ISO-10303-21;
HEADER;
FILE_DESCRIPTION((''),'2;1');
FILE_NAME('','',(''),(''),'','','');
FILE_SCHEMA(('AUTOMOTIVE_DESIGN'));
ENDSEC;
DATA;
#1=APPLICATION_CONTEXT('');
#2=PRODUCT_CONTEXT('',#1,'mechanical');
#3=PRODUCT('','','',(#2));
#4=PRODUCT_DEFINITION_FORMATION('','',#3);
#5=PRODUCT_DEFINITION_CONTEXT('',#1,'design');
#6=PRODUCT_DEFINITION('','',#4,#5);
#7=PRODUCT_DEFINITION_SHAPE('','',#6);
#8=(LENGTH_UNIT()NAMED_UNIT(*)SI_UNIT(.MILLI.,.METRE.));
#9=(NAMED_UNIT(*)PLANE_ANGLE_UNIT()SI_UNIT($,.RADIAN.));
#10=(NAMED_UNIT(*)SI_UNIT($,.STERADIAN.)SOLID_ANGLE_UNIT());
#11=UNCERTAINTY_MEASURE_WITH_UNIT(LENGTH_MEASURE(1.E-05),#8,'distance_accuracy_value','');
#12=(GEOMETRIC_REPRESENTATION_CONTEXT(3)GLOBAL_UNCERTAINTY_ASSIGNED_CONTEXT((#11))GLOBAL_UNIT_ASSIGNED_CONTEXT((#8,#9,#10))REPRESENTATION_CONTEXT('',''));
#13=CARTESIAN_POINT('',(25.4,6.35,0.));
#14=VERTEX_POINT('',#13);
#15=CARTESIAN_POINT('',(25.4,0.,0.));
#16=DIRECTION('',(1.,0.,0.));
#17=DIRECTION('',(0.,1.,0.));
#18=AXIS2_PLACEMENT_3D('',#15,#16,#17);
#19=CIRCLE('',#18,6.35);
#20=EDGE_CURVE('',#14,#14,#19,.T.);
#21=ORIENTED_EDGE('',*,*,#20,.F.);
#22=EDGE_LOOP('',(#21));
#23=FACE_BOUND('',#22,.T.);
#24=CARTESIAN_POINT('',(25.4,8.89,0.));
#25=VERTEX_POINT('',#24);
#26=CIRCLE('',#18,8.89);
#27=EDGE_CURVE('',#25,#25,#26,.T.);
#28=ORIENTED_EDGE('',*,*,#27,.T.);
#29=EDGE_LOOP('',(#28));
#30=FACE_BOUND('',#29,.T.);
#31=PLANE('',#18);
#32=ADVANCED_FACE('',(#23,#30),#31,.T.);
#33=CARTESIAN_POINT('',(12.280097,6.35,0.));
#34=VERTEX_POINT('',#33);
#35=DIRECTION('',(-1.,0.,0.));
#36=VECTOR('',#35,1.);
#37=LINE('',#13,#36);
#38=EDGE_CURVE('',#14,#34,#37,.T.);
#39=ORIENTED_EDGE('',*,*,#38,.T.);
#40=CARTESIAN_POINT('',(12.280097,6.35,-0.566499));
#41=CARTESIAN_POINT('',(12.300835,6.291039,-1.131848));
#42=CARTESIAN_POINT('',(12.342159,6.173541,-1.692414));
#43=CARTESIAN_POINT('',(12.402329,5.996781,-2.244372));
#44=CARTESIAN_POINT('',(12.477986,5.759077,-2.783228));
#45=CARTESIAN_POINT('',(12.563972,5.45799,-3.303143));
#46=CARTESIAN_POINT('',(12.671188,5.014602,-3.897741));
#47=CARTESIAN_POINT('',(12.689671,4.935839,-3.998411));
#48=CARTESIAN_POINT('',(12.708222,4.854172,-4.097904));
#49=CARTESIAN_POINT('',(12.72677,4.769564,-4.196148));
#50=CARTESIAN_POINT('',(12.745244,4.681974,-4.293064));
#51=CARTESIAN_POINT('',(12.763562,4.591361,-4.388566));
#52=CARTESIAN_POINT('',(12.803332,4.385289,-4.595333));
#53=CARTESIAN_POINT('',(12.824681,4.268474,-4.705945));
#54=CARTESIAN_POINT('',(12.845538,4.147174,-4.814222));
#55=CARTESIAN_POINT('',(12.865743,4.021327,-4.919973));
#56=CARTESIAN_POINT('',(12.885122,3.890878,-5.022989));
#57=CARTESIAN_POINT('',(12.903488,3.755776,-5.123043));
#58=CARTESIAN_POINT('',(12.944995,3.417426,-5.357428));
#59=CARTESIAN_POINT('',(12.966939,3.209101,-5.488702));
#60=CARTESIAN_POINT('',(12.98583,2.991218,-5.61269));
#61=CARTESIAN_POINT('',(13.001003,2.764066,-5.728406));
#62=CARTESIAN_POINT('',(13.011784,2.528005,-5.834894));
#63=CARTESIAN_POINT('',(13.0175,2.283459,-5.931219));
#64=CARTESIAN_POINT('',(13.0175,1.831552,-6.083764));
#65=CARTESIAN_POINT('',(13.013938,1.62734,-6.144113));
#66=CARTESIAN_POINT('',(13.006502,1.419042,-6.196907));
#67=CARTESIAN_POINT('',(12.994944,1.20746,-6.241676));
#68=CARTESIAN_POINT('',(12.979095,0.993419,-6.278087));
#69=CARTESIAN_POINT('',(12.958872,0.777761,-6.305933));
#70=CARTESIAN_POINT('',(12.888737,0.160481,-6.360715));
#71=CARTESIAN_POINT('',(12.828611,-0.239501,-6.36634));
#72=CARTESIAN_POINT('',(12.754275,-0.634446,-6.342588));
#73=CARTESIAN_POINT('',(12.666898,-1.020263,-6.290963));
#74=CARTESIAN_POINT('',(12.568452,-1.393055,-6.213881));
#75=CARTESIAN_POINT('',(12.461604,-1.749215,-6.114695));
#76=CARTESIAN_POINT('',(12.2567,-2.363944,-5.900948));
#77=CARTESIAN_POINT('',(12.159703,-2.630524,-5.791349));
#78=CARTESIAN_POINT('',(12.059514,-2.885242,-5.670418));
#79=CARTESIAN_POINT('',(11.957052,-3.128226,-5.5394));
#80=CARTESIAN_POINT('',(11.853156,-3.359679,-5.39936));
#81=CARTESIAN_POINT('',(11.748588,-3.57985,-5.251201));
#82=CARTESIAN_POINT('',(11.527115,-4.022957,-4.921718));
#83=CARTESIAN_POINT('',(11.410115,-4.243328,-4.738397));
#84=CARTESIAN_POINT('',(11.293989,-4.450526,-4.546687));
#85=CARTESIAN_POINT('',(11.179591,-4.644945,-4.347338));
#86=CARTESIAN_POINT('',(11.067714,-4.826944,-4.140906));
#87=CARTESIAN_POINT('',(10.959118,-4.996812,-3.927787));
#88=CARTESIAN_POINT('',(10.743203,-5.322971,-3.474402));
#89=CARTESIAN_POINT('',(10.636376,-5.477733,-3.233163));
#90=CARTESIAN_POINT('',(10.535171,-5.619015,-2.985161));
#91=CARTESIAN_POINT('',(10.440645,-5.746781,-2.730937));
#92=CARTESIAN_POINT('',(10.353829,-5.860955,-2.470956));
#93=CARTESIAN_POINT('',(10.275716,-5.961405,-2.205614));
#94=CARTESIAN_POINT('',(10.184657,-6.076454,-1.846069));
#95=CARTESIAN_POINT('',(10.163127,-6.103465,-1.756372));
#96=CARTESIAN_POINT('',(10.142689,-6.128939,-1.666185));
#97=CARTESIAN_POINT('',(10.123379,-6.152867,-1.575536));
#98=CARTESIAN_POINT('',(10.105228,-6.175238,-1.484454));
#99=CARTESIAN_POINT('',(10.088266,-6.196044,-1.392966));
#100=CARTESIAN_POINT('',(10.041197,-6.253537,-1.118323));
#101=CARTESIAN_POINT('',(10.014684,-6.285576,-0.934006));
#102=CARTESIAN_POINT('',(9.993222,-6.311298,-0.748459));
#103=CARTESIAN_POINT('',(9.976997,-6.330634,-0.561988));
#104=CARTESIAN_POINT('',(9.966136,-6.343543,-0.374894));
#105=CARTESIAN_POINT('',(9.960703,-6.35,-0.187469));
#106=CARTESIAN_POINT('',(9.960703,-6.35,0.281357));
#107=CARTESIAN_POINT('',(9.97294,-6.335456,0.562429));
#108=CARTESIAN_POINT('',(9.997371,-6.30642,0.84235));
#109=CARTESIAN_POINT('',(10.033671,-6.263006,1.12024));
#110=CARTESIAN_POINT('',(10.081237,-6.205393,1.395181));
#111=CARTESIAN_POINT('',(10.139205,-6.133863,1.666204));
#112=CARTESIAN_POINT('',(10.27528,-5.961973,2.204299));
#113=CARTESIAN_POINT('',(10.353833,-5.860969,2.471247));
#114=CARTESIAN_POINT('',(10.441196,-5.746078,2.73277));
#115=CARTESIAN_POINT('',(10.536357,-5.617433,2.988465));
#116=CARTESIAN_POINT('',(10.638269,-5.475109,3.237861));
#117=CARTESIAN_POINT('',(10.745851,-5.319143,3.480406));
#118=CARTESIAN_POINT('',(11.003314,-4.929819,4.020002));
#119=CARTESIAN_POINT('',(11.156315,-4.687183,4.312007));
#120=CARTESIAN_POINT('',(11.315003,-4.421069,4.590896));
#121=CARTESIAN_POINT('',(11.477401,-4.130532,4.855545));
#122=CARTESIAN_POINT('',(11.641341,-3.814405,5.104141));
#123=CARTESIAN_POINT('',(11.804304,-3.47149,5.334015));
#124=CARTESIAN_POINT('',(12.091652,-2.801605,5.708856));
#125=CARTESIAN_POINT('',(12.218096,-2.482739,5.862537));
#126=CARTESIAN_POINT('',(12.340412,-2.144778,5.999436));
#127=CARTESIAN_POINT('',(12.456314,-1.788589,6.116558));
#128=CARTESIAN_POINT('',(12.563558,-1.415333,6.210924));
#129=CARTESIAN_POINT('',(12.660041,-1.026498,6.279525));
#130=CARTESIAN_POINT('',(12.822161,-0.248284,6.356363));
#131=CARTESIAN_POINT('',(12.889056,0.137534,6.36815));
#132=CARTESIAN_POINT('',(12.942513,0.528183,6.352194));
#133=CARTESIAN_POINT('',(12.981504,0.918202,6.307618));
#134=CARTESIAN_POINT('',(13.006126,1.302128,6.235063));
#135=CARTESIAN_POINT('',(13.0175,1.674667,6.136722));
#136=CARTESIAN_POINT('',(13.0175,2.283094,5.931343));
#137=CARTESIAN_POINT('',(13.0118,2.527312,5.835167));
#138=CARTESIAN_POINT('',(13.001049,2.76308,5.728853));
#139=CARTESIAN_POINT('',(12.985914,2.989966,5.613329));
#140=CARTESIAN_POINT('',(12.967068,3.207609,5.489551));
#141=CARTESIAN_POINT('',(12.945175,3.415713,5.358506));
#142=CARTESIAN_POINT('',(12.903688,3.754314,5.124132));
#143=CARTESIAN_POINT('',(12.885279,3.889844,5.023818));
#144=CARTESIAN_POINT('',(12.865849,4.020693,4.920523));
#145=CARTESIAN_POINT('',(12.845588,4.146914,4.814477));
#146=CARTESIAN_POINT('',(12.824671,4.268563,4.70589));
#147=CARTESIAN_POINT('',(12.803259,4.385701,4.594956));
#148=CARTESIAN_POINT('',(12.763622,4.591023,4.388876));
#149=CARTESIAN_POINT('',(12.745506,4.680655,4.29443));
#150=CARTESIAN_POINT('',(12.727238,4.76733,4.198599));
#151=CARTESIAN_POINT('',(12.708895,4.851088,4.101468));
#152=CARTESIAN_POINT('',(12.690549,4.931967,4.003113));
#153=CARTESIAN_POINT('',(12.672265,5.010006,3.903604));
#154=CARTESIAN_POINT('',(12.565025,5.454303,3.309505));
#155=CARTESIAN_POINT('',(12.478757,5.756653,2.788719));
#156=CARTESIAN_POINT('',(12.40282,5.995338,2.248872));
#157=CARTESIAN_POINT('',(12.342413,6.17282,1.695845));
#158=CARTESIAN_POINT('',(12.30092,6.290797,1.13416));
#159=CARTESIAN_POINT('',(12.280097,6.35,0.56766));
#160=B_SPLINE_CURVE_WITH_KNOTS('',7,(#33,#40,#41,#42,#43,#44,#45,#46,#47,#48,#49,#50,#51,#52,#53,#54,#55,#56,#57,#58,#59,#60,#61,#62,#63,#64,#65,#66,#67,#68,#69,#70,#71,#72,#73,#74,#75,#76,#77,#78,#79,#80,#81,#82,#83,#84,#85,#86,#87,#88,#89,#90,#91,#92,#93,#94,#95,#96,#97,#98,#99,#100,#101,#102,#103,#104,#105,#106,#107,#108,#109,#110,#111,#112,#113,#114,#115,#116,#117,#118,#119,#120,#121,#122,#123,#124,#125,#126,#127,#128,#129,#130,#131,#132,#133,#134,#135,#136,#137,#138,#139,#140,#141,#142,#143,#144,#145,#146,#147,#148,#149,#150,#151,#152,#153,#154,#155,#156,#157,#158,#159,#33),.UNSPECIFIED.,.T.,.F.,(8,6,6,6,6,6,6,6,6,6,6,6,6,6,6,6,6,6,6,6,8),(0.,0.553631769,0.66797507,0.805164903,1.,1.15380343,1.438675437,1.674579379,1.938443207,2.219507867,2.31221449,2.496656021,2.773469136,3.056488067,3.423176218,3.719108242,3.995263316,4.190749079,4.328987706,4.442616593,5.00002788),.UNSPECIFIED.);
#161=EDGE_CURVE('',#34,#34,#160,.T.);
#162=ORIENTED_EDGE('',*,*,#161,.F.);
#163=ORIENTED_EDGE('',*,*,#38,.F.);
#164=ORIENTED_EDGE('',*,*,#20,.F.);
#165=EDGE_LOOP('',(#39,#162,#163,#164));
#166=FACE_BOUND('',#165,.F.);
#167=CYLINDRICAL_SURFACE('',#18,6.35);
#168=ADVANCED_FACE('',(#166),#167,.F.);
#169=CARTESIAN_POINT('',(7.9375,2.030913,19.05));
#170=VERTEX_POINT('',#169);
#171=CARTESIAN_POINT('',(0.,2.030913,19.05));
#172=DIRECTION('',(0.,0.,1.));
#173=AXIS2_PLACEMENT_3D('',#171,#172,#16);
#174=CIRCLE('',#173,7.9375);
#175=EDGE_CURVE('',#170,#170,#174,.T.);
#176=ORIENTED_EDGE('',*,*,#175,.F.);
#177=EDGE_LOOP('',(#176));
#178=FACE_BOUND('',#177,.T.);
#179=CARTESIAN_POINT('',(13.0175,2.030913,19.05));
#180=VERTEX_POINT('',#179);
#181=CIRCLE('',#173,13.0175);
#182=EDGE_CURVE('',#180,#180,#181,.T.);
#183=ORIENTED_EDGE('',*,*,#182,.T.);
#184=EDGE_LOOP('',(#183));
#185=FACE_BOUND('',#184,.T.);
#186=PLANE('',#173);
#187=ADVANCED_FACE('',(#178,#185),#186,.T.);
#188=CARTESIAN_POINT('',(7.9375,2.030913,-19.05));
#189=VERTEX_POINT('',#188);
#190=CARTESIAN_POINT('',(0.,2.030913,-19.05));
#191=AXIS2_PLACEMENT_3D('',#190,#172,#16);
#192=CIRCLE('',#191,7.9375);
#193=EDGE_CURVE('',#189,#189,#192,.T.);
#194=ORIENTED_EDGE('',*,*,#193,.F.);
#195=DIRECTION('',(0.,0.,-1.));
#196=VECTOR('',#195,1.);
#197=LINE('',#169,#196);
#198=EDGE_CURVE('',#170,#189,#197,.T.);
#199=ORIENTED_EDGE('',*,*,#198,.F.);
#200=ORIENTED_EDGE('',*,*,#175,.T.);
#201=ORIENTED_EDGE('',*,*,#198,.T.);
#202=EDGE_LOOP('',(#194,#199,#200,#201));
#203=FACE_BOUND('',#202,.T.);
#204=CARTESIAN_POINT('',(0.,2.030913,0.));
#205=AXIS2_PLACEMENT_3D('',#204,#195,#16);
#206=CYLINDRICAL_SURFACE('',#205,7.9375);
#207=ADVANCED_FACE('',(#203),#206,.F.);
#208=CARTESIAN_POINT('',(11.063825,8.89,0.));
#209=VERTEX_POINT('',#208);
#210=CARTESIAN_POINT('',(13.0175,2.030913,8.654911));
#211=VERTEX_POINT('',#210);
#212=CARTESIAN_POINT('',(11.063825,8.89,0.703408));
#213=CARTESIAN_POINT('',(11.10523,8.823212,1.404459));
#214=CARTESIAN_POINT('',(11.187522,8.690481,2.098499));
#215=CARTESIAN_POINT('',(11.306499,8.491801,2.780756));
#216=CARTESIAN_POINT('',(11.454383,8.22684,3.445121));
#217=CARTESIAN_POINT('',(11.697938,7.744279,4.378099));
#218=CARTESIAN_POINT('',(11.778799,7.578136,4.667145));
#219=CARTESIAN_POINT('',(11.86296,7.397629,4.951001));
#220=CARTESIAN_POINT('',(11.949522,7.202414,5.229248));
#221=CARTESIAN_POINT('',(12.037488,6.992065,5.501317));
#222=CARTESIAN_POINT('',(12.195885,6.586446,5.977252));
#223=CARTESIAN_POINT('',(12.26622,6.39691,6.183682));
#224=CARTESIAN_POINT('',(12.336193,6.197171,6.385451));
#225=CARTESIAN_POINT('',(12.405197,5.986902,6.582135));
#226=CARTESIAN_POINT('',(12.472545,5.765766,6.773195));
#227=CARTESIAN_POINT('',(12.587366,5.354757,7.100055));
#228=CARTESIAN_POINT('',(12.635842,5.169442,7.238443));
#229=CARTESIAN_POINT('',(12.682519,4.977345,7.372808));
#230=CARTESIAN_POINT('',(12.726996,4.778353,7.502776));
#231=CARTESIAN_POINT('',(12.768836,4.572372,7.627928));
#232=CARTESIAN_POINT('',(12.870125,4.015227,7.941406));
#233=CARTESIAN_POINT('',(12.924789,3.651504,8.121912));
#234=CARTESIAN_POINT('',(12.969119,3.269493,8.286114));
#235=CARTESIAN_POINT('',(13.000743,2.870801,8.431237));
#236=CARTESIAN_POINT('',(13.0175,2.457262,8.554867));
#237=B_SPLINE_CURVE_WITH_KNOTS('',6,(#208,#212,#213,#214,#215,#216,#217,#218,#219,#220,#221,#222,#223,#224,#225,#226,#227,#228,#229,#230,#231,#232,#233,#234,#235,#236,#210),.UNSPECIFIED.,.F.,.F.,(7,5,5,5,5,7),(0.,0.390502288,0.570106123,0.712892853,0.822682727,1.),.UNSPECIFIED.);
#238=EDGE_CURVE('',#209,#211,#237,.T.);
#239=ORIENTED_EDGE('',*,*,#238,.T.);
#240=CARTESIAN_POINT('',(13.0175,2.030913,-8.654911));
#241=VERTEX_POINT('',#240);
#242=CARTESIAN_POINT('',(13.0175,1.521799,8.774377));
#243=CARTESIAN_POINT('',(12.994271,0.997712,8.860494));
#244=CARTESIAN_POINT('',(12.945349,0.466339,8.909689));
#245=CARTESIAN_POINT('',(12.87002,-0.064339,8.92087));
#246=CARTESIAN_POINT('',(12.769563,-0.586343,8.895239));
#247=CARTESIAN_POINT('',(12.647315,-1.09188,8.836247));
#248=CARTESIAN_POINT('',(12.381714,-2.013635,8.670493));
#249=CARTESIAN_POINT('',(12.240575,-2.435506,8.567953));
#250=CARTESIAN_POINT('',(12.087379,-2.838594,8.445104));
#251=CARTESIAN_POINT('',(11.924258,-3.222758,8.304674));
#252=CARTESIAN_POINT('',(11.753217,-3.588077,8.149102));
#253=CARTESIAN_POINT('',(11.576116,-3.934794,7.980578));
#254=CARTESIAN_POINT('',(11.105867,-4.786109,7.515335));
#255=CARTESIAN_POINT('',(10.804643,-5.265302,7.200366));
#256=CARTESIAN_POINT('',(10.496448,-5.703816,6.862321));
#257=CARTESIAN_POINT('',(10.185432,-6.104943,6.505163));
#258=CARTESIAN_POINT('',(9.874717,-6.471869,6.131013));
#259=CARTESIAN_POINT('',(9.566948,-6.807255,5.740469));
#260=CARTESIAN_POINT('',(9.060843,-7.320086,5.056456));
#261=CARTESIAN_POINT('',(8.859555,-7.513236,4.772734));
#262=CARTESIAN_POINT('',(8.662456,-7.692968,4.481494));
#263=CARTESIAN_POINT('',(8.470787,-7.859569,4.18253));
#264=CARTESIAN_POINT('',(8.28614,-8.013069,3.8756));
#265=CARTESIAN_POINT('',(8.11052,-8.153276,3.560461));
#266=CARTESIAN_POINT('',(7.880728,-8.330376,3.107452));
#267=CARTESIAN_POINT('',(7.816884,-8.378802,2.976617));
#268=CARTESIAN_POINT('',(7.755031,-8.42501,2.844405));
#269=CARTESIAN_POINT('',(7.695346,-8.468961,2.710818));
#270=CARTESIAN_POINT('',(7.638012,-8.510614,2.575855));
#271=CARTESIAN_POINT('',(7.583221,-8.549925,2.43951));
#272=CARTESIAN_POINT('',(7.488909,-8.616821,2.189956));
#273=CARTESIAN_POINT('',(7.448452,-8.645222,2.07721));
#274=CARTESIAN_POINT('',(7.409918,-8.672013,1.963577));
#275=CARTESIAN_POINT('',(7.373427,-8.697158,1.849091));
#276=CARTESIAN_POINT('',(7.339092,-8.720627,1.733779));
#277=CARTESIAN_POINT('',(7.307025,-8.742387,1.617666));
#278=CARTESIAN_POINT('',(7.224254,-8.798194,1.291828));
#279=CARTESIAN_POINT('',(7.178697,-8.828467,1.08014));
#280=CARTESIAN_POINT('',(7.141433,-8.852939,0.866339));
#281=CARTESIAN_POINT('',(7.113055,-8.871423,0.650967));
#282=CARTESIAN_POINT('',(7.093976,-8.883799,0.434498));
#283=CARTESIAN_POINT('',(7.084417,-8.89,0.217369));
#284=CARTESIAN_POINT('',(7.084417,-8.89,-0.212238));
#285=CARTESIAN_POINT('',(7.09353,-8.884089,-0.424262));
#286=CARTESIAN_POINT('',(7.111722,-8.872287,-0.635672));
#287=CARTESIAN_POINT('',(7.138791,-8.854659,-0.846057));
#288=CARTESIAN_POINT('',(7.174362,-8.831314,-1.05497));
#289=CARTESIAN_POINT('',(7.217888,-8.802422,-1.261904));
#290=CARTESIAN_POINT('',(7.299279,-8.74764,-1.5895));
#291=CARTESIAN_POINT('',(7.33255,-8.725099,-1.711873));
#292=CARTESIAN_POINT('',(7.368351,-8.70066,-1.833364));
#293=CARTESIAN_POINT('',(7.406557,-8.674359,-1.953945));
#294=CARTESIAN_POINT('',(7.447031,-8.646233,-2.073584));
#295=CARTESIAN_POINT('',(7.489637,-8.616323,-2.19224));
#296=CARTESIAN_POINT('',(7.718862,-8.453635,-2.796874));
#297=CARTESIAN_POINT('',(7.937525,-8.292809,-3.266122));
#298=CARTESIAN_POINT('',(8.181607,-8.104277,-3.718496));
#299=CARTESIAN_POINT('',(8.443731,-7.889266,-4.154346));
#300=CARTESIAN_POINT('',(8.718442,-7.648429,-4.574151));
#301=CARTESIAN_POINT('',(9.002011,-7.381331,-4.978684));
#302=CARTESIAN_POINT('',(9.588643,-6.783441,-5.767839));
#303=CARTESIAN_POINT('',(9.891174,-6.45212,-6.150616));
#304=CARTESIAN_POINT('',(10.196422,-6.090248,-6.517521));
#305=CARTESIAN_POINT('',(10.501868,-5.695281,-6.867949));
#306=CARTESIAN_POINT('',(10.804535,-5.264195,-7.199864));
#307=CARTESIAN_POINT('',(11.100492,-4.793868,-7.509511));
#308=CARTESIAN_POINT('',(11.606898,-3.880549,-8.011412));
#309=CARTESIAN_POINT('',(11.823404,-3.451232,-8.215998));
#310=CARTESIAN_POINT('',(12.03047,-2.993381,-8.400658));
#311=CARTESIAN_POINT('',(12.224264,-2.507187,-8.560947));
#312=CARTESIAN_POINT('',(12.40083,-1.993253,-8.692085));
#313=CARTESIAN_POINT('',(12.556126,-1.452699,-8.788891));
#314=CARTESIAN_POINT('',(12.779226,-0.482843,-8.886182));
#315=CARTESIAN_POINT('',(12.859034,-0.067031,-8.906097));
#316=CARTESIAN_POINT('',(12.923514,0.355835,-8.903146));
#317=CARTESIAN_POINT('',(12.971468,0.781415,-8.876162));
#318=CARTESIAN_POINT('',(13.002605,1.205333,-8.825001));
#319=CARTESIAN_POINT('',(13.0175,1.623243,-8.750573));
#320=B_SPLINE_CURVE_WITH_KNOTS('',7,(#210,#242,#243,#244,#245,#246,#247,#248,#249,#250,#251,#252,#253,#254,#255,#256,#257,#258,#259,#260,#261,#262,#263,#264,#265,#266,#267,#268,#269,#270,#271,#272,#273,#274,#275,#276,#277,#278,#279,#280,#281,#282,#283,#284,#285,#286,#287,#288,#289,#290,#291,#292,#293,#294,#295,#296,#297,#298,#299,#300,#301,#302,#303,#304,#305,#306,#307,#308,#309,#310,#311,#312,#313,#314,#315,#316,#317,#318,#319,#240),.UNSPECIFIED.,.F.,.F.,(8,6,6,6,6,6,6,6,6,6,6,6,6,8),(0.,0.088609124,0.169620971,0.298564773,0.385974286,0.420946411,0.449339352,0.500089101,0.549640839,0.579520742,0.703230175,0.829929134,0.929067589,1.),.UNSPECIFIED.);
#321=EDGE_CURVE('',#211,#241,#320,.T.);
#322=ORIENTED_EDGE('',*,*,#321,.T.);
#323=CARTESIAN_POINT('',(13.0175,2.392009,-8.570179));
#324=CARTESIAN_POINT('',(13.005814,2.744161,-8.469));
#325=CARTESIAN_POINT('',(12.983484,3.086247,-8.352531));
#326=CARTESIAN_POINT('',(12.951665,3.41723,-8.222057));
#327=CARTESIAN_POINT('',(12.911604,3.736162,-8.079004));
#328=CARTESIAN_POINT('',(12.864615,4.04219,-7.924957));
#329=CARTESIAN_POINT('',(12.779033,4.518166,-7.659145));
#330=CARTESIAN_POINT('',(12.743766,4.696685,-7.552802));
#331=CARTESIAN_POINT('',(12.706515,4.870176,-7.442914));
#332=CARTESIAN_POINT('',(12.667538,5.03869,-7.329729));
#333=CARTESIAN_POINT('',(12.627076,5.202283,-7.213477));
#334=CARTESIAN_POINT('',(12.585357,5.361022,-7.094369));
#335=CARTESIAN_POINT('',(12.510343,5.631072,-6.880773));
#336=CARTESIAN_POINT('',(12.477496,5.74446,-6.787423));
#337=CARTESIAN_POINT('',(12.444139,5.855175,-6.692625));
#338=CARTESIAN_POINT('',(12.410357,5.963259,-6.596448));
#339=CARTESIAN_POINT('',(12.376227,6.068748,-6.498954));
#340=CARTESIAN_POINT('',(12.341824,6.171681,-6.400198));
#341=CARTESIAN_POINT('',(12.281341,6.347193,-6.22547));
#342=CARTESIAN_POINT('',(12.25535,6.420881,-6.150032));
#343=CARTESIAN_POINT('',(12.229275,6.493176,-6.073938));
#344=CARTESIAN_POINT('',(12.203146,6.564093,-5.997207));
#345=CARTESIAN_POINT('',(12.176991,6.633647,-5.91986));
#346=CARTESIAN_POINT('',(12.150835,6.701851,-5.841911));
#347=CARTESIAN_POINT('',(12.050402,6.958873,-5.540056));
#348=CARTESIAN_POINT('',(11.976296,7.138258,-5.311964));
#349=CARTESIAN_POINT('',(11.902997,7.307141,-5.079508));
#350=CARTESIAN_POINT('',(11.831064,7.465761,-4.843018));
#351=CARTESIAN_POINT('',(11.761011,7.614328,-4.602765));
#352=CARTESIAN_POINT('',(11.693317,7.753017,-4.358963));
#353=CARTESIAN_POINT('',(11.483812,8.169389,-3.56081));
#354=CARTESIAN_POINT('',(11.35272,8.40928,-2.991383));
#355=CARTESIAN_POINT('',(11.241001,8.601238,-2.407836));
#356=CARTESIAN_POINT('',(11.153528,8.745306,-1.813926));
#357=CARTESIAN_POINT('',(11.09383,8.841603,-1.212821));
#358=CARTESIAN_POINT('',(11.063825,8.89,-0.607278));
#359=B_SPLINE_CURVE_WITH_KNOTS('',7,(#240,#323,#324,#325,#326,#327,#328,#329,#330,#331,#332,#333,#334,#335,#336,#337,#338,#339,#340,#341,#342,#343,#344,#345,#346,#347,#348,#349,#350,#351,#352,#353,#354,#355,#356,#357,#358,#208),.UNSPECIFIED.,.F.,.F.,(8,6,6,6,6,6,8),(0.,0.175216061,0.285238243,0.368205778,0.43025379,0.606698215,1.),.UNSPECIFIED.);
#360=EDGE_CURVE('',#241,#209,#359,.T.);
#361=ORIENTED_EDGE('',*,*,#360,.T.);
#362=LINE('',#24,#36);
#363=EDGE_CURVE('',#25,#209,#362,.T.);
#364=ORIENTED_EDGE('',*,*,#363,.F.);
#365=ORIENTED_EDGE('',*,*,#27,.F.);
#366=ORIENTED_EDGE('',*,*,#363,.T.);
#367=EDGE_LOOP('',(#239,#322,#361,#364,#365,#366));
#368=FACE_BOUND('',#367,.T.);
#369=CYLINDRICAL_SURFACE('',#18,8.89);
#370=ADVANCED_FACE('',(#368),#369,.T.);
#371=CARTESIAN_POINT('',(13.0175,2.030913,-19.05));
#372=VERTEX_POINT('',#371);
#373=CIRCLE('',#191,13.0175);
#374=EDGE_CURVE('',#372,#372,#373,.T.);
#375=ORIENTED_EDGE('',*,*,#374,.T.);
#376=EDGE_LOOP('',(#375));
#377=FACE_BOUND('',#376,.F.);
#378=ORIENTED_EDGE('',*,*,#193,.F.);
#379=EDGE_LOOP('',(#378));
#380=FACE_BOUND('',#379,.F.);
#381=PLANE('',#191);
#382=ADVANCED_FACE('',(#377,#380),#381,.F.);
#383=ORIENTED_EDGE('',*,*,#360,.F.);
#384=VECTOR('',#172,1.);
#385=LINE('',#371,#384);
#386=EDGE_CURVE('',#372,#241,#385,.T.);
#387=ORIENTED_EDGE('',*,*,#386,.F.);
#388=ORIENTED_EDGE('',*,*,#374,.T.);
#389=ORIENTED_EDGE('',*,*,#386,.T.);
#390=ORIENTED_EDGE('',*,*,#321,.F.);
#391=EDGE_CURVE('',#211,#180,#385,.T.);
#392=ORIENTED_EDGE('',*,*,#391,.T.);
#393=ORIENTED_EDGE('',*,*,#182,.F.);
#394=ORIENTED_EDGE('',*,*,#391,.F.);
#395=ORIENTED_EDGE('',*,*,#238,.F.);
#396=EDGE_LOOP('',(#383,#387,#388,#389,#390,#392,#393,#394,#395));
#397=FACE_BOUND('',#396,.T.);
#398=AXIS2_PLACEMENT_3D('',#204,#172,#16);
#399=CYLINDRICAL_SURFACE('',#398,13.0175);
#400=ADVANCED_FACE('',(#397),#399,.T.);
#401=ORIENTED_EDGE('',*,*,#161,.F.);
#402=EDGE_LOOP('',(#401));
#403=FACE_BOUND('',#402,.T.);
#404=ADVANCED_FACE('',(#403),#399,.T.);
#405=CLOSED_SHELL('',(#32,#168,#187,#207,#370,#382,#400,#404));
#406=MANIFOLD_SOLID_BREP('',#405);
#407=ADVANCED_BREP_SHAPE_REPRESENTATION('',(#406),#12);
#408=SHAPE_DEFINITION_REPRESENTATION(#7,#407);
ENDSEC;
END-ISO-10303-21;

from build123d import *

# Parameters (mm, degrees)
F0_R          = 13.0175
F0_R_2        = 7.9375
F1_DEPTH      = 19.05
F1_DEPTH_BACK = 19.05
F4_END_RADIUS = 13.0175
F3_R          = 8.89
F3_R_2        = 6.35
F4_REACH      = 63.563217139


with BuildPart() as f1:
    # F0 (on Top) → F1 (new body, two sides)
    with BuildSketch(Plane.XY) as f1_sk:
        with Locations((0, 2.0309128979)):
            Circle(F0_R)
        with Locations((0, 2.0309128979)):
            Circle(F0_R_2, mode=Mode.SUBTRACT)
    extrude(amount=F1_DEPTH)
    extrude(f1_sk.sketch, amount=-F1_DEPTH_BACK)

    f4_end = (Plane(origin=(0, 2.0309128979, -9.525), x_dir=(1, 0, 0), z_dir=(0, 0, 1)) * Cylinder(F4_END_RADIUS, 233.0934565066, mode=Mode.PRIVATE)).faces().sort_by_distance((-13.0175, 2.0309128979, -9.525))[0]
    # F3 (on offset) → F4 (join, up to the whole of a round face its end follows)
    with BuildSketch(Plane.YZ.offset(25.4)):
        Circle(F3_R)
        Circle(F3_R_2, mode=Mode.SUBTRACT)
    f4_long = extrude(amount=-F4_REACH, mode=Mode.PRIVATE)
    add(split(f4_long, bisect_by=f4_end, keep=Keep.ALL, mode=Mode.PRIVATE).solids().sort_by_distance((25.4, -8.6385528286, 0))[0])


solid = f1.part
